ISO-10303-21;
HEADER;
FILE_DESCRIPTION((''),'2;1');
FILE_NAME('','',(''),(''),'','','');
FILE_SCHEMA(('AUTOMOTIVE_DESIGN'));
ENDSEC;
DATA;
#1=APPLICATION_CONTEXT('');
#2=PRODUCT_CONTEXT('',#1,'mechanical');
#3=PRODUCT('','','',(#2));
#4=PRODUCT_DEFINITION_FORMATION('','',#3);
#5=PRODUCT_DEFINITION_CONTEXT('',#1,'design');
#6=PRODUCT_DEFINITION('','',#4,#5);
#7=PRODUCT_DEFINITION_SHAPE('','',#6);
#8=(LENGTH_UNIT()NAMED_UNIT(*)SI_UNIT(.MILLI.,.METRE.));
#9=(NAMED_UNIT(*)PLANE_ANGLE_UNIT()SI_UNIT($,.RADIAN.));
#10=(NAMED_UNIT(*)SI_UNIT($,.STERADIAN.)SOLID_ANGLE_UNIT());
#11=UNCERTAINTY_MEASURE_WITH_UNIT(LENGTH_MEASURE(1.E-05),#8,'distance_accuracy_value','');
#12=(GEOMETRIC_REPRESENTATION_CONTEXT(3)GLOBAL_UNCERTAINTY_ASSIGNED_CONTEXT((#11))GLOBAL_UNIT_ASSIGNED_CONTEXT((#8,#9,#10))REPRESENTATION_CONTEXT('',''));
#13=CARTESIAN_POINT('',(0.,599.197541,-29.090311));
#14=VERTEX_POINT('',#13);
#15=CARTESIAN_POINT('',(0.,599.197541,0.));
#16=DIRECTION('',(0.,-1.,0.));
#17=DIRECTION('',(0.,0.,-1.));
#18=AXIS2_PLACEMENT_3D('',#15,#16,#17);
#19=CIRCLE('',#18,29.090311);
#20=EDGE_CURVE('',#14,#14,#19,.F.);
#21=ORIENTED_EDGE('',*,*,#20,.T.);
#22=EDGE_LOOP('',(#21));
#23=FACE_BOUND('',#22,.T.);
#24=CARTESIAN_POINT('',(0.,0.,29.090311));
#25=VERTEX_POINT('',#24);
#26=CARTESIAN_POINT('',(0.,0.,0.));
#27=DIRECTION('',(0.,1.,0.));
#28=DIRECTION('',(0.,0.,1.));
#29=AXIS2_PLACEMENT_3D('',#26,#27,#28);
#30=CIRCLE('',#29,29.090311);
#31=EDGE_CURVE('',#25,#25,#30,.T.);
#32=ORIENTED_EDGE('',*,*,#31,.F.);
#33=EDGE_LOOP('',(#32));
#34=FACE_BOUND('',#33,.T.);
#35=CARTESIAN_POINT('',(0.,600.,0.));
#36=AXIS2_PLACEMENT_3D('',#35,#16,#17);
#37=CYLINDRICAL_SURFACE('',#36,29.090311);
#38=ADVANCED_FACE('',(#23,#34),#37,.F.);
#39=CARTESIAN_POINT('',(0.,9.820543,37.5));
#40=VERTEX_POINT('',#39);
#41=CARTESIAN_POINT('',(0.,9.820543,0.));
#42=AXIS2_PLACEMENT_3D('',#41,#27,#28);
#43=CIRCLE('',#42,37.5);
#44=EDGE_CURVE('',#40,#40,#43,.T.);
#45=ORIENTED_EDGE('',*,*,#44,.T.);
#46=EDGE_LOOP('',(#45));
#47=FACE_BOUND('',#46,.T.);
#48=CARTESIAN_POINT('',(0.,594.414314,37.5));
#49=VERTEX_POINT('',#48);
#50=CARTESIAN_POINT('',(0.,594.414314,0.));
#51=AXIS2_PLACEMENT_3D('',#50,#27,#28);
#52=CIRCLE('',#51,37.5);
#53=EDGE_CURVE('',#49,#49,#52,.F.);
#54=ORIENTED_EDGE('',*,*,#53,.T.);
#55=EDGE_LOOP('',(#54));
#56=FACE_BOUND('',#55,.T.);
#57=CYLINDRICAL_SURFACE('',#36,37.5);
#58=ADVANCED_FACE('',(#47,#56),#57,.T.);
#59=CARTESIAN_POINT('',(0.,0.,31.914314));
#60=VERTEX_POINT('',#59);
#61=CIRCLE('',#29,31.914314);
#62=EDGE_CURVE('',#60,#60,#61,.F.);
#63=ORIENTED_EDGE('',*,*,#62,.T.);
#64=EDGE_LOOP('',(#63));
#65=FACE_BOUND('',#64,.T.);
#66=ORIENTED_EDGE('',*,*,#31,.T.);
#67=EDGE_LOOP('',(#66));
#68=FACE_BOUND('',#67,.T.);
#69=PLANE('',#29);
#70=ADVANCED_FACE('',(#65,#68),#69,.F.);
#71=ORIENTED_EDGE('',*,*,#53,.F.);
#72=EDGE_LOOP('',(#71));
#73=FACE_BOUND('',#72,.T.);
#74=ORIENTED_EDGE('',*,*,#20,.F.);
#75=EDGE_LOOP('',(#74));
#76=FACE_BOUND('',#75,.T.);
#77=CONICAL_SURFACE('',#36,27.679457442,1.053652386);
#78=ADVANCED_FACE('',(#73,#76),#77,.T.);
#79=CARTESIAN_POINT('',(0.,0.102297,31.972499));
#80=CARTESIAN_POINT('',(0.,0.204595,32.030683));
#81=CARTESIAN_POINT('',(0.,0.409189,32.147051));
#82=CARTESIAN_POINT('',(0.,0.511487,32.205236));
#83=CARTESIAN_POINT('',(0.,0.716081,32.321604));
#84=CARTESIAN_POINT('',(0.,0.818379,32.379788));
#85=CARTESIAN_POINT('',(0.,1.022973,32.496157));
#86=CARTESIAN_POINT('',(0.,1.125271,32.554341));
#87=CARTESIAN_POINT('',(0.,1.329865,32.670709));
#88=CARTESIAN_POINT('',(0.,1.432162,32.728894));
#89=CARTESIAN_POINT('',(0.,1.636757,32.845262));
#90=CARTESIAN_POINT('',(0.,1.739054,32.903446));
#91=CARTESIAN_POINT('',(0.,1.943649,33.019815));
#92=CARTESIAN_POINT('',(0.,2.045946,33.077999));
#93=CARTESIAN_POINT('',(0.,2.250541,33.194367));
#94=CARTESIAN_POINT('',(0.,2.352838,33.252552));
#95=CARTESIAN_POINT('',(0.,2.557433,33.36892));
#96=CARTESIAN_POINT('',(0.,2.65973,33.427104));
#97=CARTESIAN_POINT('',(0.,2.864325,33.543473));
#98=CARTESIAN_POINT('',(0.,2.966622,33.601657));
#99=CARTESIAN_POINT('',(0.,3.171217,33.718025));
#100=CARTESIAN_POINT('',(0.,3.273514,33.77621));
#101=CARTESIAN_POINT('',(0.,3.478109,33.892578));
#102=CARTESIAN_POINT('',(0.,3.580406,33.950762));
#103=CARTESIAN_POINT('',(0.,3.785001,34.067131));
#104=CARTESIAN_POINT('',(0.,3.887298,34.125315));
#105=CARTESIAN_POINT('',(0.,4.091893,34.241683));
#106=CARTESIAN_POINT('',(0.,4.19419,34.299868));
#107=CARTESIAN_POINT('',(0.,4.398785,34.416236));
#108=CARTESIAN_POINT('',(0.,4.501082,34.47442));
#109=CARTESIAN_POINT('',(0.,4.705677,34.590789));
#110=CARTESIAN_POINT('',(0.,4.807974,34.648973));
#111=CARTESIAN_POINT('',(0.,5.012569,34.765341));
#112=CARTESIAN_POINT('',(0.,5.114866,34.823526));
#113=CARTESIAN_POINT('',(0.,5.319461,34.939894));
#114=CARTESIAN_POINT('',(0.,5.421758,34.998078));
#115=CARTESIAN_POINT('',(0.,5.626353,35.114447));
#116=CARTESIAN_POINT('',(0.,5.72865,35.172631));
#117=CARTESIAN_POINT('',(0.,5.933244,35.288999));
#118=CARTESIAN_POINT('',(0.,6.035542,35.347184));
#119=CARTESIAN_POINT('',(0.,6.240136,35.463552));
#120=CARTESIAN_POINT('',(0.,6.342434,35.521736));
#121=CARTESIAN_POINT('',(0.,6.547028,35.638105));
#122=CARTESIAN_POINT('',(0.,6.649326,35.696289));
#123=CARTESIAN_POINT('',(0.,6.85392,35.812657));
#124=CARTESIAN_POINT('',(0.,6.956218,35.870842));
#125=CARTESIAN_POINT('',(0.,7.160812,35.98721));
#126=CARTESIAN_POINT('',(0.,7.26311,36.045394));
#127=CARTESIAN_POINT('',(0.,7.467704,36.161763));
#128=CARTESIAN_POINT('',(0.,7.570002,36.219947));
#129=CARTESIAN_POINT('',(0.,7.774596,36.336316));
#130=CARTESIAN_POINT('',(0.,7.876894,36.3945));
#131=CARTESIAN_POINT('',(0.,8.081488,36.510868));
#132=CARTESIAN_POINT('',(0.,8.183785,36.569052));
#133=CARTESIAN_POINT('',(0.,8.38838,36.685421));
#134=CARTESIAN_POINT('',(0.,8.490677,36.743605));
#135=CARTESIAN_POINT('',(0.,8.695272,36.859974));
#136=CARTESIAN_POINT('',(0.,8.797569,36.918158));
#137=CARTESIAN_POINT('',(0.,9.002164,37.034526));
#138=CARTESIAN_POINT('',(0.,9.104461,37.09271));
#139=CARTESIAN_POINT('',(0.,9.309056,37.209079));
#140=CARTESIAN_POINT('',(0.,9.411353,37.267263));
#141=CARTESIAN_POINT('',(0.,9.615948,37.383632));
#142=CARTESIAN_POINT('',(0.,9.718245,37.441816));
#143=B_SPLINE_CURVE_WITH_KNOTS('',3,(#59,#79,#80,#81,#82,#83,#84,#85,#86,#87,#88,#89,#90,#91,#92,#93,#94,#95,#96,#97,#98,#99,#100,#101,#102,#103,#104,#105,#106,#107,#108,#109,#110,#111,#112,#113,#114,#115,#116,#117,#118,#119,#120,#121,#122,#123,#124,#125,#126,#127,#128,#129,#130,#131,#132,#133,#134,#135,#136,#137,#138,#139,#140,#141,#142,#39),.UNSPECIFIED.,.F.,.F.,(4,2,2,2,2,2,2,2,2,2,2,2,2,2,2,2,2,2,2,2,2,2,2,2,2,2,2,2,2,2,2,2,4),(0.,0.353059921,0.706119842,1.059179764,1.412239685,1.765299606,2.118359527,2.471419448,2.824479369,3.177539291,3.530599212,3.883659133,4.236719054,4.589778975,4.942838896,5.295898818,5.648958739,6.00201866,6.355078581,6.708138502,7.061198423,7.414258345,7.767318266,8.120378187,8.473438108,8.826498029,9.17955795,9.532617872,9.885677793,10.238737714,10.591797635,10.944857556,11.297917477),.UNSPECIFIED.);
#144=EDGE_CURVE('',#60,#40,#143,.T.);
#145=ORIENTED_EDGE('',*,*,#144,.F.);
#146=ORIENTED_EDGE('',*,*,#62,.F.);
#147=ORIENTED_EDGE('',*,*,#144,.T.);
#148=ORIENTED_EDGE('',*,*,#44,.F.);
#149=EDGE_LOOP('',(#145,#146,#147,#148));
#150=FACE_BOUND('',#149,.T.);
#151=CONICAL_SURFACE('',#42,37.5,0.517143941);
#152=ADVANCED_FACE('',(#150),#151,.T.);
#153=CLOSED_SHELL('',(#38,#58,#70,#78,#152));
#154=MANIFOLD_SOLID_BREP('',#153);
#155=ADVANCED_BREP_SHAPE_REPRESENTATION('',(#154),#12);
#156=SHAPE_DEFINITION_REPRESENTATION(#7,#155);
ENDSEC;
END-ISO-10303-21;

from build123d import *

# Parameters (mm, degrees)
SKETCH1_R           = 37.5
BOSS_EXTRUDE1_DEPTH = 600
SKETCH2_R           = 29.090310814
CUT_EXTRUDE1_DEPTH  = 603.339190158
CHAMFER1_SIZE       = 5.585686
CHAMFER1_SIZE_2     = 9.820543


with BuildPart() as part:
    # Sketch1 → Boss-Extrude1 (new body)
    with BuildSketch(Plane(origin=(0, 0, 0), x_dir=(1, 0, 0), z_dir=(0, 1, 0))):
        with Locations(Location((0, 0, 0), (0, 0, 270))):
            Circle(SKETCH1_R)
    extrude(amount=BOSS_EXTRUDE1_DEPTH)

    # Sketch2 → Cut-Extrude1 (cut, through all)
    with BuildSketch(Plane(origin=(0, 0, 0), x_dir=(1, 0, 0), z_dir=(0, 1, 0))):
        with Locations(Location((0, 0, 0), (0, 0, 270))):
            Circle(SKETCH2_R)
    extrude(amount=CUT_EXTRUDE1_DEPTH, mode=Mode.SUBTRACT)

    # Chamfer1
    # the kernel refuses this chamfer: 9.820543, 5.585686 mm, written as the material it takes off along each edge
    with BuildSketch(Plane(origin=(0, 600, 0), x_dir=(0, 0, 1), z_dir=(-1, 0, 0))) as chamfer1_piece_1:
        Polygon((37.5, -CHAMFER1_SIZE), (37.5 - CHAMFER1_SIZE_2, 0), (37.5, 0), align=None)
    revolve(axis=Axis((0, 600, 0), (0, 1, 0)), mode=Mode.SUBTRACT)
    with BuildSketch(Plane(origin=(0, 0, 0), x_dir=(0, 0, 1), z_dir=(-1, 0, 0))) as chamfer1_piece_2:
        Polygon((37.5, CHAMFER1_SIZE_2), (37.5 - CHAMFER1_SIZE, 0), (37.5, 0), align=None)
    revolve(axis=Axis((0, 0, 0), (0, 1, 0)), mode=Mode.SUBTRACT)


solid = part.part
